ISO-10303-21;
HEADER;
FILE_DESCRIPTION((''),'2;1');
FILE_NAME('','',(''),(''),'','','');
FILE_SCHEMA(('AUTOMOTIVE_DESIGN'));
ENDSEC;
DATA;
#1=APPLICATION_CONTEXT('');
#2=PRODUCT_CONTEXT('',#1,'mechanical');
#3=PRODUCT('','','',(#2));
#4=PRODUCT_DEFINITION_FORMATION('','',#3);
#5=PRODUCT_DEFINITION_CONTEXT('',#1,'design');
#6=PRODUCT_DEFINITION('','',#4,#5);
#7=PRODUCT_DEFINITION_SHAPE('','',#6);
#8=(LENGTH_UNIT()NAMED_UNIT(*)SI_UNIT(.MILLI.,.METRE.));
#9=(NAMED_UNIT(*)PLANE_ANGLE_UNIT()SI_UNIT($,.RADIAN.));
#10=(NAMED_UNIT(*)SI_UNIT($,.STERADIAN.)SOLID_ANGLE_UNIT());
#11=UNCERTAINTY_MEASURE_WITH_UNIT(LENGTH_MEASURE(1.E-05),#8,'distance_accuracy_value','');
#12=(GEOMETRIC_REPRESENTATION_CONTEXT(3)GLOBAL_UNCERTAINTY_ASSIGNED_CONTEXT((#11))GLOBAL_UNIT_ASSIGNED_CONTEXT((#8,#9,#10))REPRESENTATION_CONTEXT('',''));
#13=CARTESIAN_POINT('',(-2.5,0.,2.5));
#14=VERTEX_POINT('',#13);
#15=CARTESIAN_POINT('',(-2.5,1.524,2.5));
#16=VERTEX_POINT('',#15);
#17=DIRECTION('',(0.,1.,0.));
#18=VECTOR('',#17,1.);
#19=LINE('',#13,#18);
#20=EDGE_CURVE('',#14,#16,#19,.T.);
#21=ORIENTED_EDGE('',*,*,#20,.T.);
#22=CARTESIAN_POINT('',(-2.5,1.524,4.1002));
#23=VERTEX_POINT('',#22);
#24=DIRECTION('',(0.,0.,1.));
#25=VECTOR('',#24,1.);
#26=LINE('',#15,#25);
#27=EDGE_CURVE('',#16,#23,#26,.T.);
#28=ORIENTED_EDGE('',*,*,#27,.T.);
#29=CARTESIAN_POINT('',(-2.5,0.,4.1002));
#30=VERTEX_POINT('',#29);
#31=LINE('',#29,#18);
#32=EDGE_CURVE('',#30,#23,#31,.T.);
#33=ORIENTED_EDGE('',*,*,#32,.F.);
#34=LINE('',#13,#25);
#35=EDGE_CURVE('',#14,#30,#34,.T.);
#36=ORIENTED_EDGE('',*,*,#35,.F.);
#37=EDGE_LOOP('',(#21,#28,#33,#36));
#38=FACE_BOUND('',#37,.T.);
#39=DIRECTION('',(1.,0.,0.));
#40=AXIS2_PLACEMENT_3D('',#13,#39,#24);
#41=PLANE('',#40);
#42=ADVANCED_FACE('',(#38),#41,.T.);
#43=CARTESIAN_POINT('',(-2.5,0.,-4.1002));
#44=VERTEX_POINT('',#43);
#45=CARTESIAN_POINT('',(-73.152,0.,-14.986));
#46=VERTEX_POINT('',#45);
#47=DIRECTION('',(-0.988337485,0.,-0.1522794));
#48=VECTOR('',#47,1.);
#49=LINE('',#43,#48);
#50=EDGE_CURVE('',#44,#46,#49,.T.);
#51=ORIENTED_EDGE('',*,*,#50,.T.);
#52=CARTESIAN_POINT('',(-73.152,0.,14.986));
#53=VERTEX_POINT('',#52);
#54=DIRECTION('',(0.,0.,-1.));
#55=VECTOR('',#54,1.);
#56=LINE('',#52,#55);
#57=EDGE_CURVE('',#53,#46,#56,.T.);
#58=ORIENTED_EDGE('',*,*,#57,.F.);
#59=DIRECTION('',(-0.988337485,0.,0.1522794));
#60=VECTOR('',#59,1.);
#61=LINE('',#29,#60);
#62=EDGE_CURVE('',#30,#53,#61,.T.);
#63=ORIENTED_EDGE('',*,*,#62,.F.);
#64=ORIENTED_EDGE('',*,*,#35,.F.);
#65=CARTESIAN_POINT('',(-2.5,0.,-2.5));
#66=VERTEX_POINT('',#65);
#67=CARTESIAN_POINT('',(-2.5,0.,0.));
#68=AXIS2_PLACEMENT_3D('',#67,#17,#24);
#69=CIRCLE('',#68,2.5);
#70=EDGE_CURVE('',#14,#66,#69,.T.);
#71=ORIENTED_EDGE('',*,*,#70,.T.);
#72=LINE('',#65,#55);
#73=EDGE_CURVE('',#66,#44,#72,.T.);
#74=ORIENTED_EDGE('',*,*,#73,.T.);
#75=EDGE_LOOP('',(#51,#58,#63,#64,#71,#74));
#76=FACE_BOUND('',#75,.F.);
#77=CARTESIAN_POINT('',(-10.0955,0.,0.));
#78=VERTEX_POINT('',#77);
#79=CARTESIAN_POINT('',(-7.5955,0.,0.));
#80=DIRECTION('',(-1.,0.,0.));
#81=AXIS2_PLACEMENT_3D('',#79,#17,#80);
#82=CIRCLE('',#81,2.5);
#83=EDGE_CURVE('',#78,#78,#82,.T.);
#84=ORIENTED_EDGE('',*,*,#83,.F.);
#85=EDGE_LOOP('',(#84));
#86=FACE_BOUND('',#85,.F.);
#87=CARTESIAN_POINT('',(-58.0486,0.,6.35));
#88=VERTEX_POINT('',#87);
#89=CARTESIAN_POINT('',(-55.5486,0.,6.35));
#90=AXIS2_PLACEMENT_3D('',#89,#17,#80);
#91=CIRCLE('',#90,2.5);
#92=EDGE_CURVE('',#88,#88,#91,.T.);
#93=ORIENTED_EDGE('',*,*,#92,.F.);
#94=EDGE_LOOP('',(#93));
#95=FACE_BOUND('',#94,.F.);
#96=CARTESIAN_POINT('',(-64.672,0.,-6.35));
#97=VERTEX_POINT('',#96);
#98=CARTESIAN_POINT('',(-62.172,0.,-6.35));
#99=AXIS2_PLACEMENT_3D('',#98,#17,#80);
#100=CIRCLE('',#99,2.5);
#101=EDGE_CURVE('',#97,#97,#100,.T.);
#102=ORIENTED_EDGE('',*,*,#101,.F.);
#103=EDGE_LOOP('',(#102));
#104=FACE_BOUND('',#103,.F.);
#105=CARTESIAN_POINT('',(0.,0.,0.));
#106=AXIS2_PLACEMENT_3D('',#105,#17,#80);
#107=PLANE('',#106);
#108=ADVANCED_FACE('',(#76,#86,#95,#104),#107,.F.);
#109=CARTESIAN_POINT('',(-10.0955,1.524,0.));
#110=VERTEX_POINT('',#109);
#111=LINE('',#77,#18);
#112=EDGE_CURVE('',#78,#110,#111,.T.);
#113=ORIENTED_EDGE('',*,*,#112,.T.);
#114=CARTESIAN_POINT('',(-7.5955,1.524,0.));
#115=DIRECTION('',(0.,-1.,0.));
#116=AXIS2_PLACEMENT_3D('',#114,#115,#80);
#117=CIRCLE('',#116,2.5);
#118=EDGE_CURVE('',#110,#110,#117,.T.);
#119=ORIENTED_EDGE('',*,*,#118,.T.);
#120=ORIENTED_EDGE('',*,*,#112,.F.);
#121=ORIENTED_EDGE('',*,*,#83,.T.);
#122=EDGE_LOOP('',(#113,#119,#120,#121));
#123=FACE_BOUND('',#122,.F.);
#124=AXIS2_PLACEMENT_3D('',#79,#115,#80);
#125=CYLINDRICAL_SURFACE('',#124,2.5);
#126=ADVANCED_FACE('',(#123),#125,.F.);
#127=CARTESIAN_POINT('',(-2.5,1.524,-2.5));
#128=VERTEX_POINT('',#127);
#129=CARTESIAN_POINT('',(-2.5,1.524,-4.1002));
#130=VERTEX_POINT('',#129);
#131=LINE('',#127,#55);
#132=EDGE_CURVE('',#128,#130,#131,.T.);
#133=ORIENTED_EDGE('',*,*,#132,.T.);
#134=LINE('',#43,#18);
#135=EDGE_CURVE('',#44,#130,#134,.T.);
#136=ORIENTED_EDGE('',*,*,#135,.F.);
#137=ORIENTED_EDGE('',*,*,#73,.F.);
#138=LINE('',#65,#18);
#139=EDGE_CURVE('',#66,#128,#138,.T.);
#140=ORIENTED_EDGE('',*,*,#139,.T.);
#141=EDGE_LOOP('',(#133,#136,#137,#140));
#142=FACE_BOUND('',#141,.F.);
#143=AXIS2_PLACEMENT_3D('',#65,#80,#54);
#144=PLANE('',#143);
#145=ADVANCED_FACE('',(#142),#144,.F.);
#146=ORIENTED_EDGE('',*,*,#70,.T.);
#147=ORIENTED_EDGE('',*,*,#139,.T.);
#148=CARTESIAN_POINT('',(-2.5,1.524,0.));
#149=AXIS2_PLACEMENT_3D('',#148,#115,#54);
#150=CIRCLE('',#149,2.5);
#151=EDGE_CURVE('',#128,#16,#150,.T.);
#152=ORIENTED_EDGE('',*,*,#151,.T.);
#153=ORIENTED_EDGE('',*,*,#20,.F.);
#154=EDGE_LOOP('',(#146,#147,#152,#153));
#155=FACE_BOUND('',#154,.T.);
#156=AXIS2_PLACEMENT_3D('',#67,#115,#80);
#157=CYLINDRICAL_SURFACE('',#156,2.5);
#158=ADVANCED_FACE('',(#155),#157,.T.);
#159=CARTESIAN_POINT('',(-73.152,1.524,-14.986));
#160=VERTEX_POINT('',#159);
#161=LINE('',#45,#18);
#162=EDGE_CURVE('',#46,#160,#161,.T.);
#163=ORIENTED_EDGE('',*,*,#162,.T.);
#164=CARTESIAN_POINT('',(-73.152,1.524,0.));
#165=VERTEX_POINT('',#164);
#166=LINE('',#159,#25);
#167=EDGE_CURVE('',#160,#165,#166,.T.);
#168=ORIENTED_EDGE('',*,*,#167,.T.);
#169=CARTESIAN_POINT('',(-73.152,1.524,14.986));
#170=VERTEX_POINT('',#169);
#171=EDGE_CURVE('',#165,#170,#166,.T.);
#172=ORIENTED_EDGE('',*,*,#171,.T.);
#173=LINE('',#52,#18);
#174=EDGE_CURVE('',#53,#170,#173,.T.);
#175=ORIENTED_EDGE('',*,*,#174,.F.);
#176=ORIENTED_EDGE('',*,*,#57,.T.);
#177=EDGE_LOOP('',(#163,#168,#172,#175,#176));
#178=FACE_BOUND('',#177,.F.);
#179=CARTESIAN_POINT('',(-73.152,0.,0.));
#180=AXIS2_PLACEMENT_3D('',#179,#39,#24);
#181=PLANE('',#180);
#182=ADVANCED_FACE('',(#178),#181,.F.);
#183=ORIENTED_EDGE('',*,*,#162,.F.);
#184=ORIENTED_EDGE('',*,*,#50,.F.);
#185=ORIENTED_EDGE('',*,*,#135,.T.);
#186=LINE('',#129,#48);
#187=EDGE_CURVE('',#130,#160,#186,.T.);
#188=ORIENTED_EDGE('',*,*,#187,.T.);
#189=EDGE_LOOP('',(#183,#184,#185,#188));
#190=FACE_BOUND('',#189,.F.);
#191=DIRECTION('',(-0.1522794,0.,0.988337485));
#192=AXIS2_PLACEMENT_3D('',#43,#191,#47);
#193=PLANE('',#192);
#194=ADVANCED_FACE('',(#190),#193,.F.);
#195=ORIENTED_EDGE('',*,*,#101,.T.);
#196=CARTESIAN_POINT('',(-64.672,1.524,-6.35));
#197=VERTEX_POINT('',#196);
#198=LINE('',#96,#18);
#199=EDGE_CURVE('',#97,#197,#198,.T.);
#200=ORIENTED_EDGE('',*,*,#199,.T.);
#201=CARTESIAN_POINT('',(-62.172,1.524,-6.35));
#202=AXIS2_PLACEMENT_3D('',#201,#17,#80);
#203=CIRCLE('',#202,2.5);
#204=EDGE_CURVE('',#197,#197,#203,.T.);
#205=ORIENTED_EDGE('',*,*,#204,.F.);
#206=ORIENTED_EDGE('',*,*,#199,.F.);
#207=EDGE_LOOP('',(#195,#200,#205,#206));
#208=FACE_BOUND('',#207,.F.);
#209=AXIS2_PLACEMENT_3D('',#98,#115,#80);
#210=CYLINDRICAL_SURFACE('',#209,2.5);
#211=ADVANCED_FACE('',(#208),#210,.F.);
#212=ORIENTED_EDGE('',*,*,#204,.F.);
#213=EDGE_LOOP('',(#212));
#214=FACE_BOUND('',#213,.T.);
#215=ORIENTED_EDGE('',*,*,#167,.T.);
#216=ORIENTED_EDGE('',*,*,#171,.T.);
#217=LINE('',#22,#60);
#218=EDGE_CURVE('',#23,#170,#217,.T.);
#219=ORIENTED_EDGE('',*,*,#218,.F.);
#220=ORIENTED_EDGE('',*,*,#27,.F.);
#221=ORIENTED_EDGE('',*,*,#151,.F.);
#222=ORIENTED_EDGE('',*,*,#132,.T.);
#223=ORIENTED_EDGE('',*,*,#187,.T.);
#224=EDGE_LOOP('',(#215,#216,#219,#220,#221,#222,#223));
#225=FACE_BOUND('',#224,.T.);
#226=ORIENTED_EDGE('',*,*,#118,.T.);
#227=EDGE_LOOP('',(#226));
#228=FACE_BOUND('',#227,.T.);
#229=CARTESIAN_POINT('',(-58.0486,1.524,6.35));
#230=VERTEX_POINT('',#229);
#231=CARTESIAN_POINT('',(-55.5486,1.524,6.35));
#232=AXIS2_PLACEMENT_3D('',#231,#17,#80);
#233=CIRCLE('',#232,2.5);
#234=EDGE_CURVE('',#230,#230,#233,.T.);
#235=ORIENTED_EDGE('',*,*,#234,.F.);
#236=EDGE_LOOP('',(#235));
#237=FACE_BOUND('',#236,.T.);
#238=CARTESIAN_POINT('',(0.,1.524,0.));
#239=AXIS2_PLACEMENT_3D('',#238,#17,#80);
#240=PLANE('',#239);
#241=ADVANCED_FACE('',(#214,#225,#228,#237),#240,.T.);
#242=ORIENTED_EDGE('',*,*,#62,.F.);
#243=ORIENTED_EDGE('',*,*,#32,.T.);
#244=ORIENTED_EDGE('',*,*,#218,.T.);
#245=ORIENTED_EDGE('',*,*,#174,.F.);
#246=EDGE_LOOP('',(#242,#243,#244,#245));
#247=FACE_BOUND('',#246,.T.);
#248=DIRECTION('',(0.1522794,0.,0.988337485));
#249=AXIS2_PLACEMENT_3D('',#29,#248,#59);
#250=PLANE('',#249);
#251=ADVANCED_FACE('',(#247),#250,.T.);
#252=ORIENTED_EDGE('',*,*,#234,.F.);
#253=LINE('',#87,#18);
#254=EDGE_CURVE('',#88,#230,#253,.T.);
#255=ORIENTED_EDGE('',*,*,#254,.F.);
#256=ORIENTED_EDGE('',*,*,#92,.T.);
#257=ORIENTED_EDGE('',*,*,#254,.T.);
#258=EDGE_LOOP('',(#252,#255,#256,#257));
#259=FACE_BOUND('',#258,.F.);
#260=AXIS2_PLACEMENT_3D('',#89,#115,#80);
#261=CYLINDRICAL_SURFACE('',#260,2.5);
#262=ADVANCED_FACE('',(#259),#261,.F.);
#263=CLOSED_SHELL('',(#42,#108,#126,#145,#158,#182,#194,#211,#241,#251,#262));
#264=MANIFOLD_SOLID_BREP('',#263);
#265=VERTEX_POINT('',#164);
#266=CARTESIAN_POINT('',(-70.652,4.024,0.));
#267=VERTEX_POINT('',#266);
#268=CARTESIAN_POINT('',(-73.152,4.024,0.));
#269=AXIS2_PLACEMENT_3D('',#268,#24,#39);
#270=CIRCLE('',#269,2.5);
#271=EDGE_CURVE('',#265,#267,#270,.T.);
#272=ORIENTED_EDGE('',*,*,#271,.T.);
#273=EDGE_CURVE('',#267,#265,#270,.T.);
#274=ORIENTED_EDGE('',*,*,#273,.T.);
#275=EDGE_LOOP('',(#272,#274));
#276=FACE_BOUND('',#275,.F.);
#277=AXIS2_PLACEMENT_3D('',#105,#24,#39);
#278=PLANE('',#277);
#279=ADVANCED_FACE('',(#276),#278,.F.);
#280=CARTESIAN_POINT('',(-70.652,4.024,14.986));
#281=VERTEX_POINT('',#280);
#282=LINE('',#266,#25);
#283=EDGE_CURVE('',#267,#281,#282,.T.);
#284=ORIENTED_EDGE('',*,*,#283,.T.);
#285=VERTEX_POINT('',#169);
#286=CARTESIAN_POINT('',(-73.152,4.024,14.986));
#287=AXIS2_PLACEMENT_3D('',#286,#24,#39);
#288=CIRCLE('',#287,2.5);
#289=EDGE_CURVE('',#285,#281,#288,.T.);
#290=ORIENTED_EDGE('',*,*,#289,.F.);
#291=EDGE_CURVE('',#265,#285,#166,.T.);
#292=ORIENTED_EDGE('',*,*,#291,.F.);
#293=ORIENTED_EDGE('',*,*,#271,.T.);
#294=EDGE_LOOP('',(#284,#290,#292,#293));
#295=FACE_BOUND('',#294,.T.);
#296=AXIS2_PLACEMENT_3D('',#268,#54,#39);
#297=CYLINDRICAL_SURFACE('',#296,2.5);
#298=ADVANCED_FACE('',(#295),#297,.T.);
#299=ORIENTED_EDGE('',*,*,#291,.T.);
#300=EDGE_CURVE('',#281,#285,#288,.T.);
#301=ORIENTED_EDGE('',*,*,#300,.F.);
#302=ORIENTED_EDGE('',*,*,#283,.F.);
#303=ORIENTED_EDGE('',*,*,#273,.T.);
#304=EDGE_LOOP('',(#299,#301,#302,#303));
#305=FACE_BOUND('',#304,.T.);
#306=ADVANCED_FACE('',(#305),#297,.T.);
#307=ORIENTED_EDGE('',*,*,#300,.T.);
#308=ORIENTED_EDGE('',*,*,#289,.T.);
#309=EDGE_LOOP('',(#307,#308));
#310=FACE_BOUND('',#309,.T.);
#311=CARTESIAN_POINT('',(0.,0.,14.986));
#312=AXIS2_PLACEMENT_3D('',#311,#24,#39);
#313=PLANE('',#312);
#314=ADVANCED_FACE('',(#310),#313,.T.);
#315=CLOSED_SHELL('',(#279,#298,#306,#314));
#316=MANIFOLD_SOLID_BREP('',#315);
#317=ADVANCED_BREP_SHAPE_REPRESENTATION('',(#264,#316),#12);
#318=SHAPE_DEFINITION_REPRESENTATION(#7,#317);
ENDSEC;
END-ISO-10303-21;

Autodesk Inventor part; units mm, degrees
ref_plane "YZ Plane" through (0, 0, 0) normal (1, 0, 0) x (0, 1, 0)
ref_plane "XZ Plane" through (0, 0, 0) normal (0, 1, 0) x (-1, 0, 0)
ref_plane "XY Plane" through (0, 0, 0) normal (0, 0, 1) x (1, 0, 0)
sketch "Sketch1" plane through (0, 0, 0) normal (0, 1, 0) x (-1, 0, 0)
  line L0 (0, 0) -> (73.152, 0)
  line L1 (73.152, 0) -> (73.152, 14.986)
  line L2 (73.152, 14.986) -> (73.152, -14.986)
  circle A0 centre (2.5, 0) radius 2.5
  line L3 (2.5, -2.5) -> (2.5, -4.1002)
  line L4 (2.5, -4.1002) -> (73.152, -14.986)
  line L5 (2.5, 2.5) -> (2.5, 4.1002)
  line L6 (2.5, 4.1002) -> (73.152, 14.986)
  circle A1 centre (7.5955, 0) radius 2.5
  circle A2 centre (62.172, -6.35) radius 2.5
  circle A3 centre (55.5486, 6.35) radius 2.5
  dimension "d3" = 5
  dimension "d0" = 73.152
  dimension "d1" = 14.986
  dimension "d2" = 29.972
  dimension "d4" = 2.5
  dimension "d5" = 1.6002
  dimension "d6" = 5
  dimension "d7" = 5
  dimension "d8" = 5
  dimension "d9" = 6.35
  dimension "d10" = 6.35
extrude "Extrusion1" add sketch "Sketch1" along normal blind 1.524 contours A0 L0 | L0 A0 | A0 L5 L6 L1 L0 A1 | L0 A1 L2 L4 L3 A0
sketch "Sketch2" plane through (0, 0, 0) normal (0, 0, 1) x (1, 0, 0)
  line L0 (-73.152, 1.524) -> (-2.5, 1.524) projected
  line L1 (-73.152, 1.524) -> (-73.152, 4.024)
  circle A0 centre (-73.152, 4.024) radius 2.5
  point P0 (0, 0)
  dimension "d13" = 2.5
extrude "Extrusion2" add sketch "Sketch2" along normal up to surface (14.986 mm away)
properties part number "Hinge"
